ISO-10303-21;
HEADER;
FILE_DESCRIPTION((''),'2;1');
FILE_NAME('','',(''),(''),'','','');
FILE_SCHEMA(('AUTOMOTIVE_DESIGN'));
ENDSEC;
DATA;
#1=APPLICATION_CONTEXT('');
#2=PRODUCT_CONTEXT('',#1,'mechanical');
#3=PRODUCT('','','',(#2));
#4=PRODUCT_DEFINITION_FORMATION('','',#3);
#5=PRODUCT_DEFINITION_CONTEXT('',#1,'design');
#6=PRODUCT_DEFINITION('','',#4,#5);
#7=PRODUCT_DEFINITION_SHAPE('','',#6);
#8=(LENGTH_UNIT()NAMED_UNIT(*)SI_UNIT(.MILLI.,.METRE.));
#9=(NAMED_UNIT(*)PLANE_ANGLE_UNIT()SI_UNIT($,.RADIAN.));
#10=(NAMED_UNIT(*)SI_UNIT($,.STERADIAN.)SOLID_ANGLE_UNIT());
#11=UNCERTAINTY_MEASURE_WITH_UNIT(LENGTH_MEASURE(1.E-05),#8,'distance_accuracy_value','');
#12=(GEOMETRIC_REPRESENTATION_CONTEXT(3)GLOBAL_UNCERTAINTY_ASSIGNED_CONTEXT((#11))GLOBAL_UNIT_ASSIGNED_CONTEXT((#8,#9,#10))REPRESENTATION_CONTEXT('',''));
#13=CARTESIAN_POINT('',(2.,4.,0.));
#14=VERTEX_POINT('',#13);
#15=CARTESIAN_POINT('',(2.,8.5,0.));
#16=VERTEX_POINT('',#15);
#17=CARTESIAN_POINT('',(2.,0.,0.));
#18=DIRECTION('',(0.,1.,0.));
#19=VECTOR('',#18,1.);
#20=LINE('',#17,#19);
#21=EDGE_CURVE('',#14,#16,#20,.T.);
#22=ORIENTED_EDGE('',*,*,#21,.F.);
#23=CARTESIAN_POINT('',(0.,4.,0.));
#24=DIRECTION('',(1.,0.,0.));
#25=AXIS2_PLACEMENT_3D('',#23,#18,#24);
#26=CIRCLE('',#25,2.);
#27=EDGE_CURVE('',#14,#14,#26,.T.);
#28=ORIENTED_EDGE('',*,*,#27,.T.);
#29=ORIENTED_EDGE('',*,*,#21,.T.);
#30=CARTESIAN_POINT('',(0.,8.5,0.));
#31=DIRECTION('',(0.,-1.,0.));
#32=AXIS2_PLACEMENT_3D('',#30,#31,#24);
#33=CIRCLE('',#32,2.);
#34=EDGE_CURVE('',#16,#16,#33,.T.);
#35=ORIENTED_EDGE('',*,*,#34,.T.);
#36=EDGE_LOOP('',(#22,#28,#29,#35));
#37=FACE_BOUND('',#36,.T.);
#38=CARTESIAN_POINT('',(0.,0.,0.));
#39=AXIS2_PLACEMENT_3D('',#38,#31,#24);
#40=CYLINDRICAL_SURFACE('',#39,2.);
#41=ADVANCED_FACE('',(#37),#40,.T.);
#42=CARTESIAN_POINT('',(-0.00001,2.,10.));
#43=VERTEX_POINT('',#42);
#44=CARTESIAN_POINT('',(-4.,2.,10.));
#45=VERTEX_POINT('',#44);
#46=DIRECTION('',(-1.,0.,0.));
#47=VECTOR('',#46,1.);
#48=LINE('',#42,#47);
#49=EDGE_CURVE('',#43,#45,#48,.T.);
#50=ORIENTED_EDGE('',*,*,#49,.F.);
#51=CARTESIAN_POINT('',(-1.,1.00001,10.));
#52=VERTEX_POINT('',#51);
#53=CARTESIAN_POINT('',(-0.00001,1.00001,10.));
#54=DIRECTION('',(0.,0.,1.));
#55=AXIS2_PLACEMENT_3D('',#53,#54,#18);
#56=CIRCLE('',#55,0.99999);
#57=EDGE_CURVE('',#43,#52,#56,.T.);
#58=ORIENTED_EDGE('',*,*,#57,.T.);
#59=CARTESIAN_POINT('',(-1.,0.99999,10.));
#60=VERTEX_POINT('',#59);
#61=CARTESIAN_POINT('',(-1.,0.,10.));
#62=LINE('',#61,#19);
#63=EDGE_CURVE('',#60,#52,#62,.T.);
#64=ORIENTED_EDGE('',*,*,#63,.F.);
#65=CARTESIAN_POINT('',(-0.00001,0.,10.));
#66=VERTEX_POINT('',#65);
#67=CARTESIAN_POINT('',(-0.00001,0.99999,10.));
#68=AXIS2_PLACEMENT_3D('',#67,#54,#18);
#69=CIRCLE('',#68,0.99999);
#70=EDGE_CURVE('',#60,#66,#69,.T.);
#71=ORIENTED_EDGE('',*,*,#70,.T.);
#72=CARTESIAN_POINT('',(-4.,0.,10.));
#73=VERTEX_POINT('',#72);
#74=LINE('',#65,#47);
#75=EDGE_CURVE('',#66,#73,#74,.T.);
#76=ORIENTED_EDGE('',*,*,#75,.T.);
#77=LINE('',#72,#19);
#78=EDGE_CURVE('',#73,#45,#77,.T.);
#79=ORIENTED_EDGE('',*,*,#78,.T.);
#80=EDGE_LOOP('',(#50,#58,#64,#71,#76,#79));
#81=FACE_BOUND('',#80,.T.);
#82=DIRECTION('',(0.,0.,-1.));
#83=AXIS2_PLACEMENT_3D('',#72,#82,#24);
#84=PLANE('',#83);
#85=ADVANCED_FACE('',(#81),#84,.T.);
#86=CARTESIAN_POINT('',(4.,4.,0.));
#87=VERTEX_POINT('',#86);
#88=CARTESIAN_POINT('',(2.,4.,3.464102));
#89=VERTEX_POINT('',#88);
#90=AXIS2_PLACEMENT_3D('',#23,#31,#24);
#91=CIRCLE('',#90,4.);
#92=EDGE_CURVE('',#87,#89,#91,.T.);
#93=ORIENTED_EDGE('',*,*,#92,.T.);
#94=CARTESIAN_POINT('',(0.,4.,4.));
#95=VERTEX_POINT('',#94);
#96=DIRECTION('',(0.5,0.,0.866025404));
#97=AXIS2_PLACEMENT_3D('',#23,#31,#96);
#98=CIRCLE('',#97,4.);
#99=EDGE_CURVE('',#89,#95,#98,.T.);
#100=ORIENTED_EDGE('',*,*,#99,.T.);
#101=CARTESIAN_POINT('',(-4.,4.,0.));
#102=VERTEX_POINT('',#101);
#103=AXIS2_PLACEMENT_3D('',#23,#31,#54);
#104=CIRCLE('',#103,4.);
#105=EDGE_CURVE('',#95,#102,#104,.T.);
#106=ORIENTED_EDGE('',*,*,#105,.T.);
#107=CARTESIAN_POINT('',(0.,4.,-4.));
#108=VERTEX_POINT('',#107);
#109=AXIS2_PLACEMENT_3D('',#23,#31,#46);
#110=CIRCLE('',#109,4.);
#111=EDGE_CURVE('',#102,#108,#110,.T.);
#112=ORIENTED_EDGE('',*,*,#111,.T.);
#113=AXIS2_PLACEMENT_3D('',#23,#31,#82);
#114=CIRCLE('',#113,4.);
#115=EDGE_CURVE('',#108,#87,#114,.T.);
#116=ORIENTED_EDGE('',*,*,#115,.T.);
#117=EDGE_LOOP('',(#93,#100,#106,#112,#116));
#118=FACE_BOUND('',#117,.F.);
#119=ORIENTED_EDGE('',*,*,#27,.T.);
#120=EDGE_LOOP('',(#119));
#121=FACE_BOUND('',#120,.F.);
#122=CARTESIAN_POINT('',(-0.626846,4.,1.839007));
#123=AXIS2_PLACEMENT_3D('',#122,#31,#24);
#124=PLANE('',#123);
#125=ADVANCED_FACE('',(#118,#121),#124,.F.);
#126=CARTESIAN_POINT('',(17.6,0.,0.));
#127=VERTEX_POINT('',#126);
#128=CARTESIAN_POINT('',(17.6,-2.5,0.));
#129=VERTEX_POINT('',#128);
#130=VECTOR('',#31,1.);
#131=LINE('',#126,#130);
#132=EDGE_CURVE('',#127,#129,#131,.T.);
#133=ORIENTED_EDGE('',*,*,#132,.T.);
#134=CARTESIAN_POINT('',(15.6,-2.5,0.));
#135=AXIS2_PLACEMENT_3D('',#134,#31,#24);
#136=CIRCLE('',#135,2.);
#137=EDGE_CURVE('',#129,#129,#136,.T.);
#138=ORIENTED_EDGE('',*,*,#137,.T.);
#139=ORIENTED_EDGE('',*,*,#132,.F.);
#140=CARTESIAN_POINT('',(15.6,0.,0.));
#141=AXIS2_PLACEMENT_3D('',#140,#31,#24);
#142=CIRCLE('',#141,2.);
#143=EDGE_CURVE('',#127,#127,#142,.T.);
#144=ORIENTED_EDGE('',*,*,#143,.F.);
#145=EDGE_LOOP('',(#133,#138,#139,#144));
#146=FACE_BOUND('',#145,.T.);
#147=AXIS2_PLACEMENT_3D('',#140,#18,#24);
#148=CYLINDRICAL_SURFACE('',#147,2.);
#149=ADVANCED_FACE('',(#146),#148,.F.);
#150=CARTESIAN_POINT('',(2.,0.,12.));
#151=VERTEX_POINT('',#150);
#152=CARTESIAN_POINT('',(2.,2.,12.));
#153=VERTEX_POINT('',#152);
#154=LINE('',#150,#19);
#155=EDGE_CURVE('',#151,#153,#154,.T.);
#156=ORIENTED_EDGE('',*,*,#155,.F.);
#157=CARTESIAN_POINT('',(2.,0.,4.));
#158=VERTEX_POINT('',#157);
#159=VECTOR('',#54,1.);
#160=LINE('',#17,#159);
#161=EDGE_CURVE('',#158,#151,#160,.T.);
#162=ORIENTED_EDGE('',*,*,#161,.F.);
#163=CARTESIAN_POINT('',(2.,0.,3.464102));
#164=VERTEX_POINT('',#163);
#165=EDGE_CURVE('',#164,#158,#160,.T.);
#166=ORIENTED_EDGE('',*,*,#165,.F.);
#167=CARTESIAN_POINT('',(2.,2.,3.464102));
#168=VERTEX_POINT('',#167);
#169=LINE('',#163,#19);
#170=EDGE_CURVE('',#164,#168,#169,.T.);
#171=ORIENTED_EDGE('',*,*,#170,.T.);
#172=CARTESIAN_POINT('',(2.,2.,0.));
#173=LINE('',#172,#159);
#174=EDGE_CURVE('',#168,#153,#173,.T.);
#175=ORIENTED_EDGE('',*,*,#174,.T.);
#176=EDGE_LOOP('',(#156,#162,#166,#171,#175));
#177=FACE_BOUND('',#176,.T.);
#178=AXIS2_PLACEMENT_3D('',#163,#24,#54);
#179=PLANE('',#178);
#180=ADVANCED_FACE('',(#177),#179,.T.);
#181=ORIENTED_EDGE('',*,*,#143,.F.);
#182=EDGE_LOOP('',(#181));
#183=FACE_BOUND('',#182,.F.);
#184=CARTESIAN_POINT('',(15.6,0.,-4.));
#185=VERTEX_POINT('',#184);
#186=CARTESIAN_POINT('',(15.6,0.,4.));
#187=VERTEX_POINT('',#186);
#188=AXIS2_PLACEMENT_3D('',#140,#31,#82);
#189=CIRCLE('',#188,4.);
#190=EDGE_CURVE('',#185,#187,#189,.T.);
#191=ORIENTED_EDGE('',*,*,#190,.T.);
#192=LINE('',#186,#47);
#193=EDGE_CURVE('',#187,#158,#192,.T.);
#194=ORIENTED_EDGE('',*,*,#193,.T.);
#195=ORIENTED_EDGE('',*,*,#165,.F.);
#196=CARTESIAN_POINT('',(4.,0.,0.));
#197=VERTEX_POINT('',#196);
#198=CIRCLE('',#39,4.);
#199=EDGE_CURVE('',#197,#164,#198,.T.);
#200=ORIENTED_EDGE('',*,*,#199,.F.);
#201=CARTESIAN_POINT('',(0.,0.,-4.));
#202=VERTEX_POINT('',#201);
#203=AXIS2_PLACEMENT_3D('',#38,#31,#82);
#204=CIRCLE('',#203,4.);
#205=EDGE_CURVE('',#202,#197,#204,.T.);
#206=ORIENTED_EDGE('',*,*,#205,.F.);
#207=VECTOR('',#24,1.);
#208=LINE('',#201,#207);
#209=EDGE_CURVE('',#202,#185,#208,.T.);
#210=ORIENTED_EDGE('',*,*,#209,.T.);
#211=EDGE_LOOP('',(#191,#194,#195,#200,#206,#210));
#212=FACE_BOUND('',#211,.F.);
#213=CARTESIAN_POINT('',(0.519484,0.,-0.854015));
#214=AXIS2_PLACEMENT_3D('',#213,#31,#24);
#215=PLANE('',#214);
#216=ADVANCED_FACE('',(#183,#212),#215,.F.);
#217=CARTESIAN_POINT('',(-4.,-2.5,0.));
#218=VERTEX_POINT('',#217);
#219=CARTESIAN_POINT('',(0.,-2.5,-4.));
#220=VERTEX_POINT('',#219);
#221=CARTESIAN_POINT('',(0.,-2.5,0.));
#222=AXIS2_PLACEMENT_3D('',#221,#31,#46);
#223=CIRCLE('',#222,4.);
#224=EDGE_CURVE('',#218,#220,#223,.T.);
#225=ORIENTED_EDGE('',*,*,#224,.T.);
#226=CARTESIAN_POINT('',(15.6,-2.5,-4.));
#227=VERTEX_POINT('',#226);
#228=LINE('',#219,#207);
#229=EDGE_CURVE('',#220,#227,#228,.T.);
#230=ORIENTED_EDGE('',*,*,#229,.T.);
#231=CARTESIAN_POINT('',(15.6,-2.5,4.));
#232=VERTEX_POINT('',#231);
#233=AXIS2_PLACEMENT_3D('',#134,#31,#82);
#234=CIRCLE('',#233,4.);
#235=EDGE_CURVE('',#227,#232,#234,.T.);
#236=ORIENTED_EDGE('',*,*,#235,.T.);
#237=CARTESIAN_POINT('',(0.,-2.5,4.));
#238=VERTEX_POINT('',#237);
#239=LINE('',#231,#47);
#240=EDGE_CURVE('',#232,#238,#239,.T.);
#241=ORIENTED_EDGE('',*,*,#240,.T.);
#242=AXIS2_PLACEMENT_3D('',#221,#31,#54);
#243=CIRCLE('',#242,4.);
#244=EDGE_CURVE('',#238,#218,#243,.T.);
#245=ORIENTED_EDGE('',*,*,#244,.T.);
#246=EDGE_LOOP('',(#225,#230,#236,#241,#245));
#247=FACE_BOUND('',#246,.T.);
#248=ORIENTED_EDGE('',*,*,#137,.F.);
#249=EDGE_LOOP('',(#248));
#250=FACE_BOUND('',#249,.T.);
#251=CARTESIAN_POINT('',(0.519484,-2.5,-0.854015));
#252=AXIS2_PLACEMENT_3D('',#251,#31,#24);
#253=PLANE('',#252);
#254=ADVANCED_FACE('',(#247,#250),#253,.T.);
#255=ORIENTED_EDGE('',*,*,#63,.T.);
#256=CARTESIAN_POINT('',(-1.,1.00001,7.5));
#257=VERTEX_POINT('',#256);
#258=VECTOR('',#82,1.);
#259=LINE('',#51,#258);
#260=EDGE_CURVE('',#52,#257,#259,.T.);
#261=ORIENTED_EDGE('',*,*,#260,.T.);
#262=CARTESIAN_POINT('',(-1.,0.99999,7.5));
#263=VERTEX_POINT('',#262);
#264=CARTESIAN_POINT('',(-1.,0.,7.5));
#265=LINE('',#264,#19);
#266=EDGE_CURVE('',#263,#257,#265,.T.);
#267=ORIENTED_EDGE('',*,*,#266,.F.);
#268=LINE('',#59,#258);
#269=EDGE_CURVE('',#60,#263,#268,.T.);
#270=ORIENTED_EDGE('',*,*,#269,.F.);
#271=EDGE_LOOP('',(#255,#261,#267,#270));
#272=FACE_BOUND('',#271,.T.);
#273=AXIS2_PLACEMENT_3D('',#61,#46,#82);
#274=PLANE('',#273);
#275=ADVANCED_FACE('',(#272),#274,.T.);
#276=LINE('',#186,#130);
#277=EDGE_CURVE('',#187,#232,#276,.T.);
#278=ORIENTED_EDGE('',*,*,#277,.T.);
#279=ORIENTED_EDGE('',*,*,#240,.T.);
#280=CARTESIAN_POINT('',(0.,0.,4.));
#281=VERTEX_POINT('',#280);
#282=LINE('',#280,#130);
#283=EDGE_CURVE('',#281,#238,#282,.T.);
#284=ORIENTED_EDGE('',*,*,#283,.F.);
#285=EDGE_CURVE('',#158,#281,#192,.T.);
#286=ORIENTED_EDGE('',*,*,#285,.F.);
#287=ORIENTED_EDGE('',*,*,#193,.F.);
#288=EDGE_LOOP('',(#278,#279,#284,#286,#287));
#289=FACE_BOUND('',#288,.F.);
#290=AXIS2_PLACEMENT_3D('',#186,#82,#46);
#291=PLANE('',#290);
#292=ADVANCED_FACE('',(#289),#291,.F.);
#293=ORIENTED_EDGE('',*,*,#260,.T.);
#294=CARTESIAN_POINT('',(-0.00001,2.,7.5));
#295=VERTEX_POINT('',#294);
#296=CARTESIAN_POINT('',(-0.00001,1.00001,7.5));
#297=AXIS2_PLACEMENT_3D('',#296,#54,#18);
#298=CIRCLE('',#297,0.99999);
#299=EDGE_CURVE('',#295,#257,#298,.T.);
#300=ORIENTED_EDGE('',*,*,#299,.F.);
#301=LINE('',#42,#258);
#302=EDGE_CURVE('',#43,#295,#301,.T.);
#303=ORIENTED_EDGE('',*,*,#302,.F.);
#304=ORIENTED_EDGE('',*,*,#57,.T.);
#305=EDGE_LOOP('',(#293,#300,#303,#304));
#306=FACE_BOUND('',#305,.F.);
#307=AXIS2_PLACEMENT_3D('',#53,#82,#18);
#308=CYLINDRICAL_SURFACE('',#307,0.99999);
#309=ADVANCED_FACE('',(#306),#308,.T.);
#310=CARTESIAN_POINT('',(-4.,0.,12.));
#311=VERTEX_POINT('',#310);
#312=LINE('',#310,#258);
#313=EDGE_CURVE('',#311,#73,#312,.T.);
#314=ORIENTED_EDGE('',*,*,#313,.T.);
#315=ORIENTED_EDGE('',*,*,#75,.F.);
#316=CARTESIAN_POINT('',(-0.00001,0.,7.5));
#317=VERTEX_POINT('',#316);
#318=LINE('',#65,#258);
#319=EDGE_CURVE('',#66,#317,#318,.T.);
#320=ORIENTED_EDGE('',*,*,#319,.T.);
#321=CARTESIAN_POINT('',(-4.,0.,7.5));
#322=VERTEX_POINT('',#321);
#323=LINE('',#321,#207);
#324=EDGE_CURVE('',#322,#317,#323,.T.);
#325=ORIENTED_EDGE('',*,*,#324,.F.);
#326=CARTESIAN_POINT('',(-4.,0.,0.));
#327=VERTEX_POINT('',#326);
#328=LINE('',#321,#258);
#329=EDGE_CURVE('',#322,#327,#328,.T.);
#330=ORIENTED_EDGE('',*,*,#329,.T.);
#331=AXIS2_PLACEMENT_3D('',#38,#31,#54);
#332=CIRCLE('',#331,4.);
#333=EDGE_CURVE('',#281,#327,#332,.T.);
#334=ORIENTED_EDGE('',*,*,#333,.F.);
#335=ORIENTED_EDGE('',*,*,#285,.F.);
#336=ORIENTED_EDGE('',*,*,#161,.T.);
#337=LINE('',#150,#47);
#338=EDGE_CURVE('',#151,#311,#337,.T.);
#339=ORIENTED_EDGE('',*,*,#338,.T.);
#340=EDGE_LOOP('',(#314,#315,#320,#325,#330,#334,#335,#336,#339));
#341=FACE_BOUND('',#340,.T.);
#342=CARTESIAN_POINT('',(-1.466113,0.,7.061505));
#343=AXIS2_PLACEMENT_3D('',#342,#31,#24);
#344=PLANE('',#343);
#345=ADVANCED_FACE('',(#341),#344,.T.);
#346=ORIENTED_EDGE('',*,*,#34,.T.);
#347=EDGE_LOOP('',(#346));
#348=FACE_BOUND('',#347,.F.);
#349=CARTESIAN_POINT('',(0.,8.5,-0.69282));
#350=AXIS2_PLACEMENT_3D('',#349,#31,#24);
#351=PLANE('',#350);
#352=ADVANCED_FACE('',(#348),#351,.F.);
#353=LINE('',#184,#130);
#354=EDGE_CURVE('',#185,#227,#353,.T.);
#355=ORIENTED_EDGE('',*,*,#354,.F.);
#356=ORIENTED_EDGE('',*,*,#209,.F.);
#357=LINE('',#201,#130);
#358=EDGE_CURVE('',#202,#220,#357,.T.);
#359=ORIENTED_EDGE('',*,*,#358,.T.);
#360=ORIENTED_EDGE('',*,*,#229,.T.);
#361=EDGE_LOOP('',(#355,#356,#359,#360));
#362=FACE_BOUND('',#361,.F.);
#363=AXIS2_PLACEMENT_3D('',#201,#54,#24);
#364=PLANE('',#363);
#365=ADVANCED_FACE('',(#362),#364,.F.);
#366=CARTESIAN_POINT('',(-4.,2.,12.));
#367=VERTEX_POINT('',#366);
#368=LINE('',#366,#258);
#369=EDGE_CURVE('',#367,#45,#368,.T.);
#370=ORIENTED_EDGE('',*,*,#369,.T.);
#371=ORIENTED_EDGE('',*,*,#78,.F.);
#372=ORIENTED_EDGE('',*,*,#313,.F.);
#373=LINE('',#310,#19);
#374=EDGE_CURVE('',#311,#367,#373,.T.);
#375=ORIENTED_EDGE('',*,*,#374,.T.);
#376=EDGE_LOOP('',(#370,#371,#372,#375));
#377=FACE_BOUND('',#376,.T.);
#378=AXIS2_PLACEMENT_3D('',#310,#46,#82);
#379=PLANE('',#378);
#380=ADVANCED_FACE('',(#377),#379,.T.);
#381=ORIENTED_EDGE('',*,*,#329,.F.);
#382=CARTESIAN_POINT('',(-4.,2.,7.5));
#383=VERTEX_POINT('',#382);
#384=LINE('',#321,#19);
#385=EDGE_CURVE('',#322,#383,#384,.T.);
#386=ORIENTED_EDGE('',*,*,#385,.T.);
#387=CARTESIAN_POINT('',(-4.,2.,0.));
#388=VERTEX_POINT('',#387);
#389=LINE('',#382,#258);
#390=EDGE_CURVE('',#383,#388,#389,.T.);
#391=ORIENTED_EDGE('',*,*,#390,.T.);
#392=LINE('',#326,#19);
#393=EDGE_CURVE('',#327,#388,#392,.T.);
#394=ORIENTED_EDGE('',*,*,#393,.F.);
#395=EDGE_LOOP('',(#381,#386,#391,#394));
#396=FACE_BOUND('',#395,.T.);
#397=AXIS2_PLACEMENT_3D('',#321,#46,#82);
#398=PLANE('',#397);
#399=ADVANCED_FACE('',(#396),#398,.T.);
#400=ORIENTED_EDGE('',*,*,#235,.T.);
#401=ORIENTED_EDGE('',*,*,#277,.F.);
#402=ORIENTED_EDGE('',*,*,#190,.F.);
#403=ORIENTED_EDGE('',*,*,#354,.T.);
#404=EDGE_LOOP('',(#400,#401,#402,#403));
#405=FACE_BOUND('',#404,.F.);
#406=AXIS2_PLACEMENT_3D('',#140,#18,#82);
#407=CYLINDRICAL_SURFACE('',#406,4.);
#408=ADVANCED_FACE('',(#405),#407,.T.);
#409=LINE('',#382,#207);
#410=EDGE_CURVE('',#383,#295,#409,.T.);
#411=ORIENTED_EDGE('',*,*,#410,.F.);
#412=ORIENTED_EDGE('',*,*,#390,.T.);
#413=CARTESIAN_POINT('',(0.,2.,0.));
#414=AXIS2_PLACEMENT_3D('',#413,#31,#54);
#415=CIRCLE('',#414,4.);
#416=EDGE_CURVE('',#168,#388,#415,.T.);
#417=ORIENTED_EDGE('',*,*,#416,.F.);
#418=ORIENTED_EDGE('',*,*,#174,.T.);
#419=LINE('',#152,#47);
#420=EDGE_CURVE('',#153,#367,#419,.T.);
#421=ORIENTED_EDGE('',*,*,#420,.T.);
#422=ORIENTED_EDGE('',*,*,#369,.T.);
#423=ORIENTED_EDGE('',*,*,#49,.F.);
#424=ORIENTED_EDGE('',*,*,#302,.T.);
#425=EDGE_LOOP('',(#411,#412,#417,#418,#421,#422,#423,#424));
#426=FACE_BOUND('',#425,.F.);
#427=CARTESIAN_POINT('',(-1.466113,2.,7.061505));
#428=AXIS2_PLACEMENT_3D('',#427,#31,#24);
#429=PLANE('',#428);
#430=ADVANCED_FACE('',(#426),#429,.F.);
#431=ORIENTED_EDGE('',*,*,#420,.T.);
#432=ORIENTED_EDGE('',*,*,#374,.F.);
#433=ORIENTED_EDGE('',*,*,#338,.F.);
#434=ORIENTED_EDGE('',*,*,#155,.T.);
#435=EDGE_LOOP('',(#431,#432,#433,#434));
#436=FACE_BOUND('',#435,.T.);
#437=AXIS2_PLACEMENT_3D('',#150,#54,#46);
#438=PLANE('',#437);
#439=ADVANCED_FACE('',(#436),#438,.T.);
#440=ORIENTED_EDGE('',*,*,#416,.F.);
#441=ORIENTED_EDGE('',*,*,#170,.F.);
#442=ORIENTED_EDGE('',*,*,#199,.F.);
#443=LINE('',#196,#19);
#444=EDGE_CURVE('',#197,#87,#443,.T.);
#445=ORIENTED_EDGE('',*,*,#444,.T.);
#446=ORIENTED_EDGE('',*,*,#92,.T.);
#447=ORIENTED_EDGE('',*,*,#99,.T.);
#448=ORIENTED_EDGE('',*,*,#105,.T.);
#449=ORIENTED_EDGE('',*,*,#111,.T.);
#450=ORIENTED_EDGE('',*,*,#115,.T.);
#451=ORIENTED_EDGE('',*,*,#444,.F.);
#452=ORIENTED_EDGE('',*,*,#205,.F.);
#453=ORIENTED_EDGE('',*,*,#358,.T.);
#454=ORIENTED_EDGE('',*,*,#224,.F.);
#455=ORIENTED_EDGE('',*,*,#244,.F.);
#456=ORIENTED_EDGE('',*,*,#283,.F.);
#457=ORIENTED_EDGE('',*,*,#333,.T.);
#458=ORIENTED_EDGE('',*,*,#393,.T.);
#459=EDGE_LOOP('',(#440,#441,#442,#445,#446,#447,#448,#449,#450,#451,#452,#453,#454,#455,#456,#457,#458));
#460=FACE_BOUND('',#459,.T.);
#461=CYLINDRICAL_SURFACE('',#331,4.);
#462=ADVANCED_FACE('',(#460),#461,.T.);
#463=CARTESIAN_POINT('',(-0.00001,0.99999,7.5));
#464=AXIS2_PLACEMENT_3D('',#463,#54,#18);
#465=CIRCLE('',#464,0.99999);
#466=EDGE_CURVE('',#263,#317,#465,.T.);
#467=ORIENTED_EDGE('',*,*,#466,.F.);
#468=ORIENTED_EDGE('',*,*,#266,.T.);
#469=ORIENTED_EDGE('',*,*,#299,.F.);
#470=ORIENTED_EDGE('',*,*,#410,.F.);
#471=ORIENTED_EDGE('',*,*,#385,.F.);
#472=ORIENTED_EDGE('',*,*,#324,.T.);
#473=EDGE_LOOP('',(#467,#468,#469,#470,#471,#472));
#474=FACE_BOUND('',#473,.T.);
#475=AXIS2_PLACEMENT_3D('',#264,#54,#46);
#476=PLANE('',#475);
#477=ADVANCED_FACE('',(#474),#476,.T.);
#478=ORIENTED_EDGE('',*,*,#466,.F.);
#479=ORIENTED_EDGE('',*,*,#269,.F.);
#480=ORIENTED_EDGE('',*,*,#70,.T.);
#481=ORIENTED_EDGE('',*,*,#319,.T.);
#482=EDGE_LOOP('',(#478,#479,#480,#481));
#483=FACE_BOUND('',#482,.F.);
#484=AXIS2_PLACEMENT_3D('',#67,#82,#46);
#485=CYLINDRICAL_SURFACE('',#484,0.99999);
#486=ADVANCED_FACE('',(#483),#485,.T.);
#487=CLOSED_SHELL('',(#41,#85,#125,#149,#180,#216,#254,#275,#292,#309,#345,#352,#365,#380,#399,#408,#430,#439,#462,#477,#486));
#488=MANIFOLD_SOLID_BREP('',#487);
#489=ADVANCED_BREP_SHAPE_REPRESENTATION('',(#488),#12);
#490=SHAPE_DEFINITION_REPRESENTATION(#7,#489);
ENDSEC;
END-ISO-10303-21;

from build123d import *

# Parameters (mm, degrees)
F0_R     = 2
F1_DEPTH = 2.5
F2_DEPTH = 4
F3_DEPTH = 8.5
F4_DEPTH = 2
F5_R     = 0.99999


# Not quite as in the source:
# - a fillet or chamfer is up to 0.001 mm smaller than in the source, because OpenCascade refuses the exact size


with BuildPart() as f1:
    # F0 (on Front) → F1 (new body)
    with BuildSketch(Plane.XZ):
        with BuildLine():
            Line((2, 3.4641016151), (2, 0))
            ThreePointArc((2, 0), (0, -2), (-2, 0))
            Line((-2, 0), (-4, 0))
            ThreePointArc((-4, 0), (-2.8284271247, -2.8284271247), (0, -4))
            ThreePointArc((0, -4), (2.8284271247, -2.8284271247), (4, 0))
            ThreePointArc((4, 0), (3.4641016151, 2), (2, 3.4641016151))
        make_face()
        with BuildLine():
            ThreePointArc((0, 4), (1.0352761804, 3.8637033052), (2, 3.4641016151))
            Line((2, 3.4641016151), (2, 4))
            Line((2, 4), (0, 4))
        make_face()
        with BuildLine():
            Line((2, 4), (2, 3.4641016151))
            ThreePointArc((2, 3.4641016151), (3.4641016151, 2), (4, 0))
            ThreePointArc((4, 0), (2.8284271247, -2.8284271247), (0, -4))
            Line((0, -4), (15.6, -4))
            ThreePointArc((15.6, -4), (19.6, 0), (15.6, 4))
            Line((15.6, 4), (2, 4))
        make_face()
        with Locations((15.6, 0)):
            Circle(F0_R, mode=Mode.SUBTRACT)
        with BuildLine():
            ThreePointArc((-2, 0), (0, 2), (2, 0))
            Line((2, 0), (2, 3.4641016151))
            ThreePointArc((2, 3.4641016151), (1.0352761804, 3.8637033052), (0, 4))
            ThreePointArc((0, 4), (-2.8284271247, 2.8284271247), (-4, 0))
            Line((-4, 0), (-2, 0))
        make_face()
        with BuildLine():
            ThreePointArc((-2, 0), (0, -2), (2, 0))
            Line((2, 0), (-2, 0))
        make_face()
        with BuildLine():
            Line((-2, 0), (2, 0))
            ThreePointArc((2, 0), (0, 2), (-2, 0))
        make_face()
    extrude(amount=F1_DEPTH)

    # F0 (on Front) → F2 (join)
    with BuildSketch(Plane.XZ):
        with BuildLine():
            ThreePointArc((-2, 0), (0, 2), (2, 0))
            Line((2, 0), (2, 3.4641016151))
            ThreePointArc((2, 3.4641016151), (1.0352761804, 3.8637033052), (0, 4))
            ThreePointArc((0, 4), (-2.8284271247, 2.8284271247), (-4, 0))
            Line((-4, 0), (-2, 0))
        make_face()
        with BuildLine():
            Line((2, 3.4641016151), (2, 0))
            ThreePointArc((2, 0), (0, -2), (-2, 0))
            Line((-2, 0), (-4, 0))
            ThreePointArc((-4, 0), (-2.8284271247, -2.8284271247), (0, -4))
            ThreePointArc((0, -4), (2.8284271247, -2.8284271247), (4, 0))
            ThreePointArc((4, 0), (3.4641016151, 2), (2, 3.4641016151))
        make_face()
    extrude(amount=-F2_DEPTH)

    # F0 (on Front) → F3 (join)
    with BuildSketch(Plane.XZ):
        with BuildLine():
            ThreePointArc((-2, 0), (0, -2), (2, 0))
            Line((2, 0), (-2, 0))
        make_face()
        with BuildLine():
            Line((-2, 0), (2, 0))
            ThreePointArc((2, 0), (0, 2), (-2, 0))
        make_face()
    extrude(amount=-F3_DEPTH)

    # F0 (on Front) → F4 (join)
    with BuildSketch(Plane.XZ):
        with BuildLine():
            Line((-4, 7.5), (-4, 0))
            ThreePointArc((-4, 0), (-2.8284271247, 2.8284271247), (0, 4))
            Line((0, 4), (2, 4))
            Line((2, 4), (2, 12))
            Line((2, 12), (-4, 12))
            Line((-4, 12), (-4, 10))
            Line((-4, 10), (-1, 10))
            Line((-1, 10), (-1, 7.5))
            Line((-1, 7.5), (-4, 7.5))
        make_face()
        with BuildLine():
            ThreePointArc((0, 4), (1.0352761804, 3.8637033052), (2, 3.4641016151))
            Line((2, 3.4641016151), (2, 4))
            Line((2, 4), (0, 4))
        make_face()
        with BuildLine():
            ThreePointArc((-2, 0), (0, 2), (2, 0))
            Line((2, 0), (2, 3.4641016151))
            ThreePointArc((2, 3.4641016151), (1.0352761804, 3.8637033052), (0, 4))
            ThreePointArc((0, 4), (-2.8284271247, 2.8284271247), (-4, 0))
            Line((-4, 0), (-2, 0))
        make_face()
        with BuildLine():
            ThreePointArc((-2, 0), (0, -2), (2, 0))
            Line((2, 0), (-2, 0))
        make_face()
        with BuildLine():
            Line((-2, 0), (2, 0))
            ThreePointArc((2, 0), (0, 2), (-2, 0))
        make_face()
        with BuildLine():
            Line((2, 3.4641016151), (2, 0))
            ThreePointArc((2, 0), (0, -2), (-2, 0))
            Line((-2, 0), (-4, 0))
            ThreePointArc((-4, 0), (-2.8284271247, -2.8284271247), (0, -4))
            ThreePointArc((0, -4), (2.8284271247, -2.8284271247), (4, 0))
            ThreePointArc((4, 0), (3.4641016151, 2), (2, 3.4641016151))
        make_face()
    extrude(amount=-F4_DEPTH)

    # F5 (radius 1 in the source; OpenCascade refuses exactly that, so slightly less here)
    f5_edges = [f1.edges().sort_by_distance(p)[0] for p in [
        (-1, 0, 8.75),
        (-1, 2, 8.75),
    ]]
    fillet(f5_edges, radius=F5_R)


solid = f1.part
